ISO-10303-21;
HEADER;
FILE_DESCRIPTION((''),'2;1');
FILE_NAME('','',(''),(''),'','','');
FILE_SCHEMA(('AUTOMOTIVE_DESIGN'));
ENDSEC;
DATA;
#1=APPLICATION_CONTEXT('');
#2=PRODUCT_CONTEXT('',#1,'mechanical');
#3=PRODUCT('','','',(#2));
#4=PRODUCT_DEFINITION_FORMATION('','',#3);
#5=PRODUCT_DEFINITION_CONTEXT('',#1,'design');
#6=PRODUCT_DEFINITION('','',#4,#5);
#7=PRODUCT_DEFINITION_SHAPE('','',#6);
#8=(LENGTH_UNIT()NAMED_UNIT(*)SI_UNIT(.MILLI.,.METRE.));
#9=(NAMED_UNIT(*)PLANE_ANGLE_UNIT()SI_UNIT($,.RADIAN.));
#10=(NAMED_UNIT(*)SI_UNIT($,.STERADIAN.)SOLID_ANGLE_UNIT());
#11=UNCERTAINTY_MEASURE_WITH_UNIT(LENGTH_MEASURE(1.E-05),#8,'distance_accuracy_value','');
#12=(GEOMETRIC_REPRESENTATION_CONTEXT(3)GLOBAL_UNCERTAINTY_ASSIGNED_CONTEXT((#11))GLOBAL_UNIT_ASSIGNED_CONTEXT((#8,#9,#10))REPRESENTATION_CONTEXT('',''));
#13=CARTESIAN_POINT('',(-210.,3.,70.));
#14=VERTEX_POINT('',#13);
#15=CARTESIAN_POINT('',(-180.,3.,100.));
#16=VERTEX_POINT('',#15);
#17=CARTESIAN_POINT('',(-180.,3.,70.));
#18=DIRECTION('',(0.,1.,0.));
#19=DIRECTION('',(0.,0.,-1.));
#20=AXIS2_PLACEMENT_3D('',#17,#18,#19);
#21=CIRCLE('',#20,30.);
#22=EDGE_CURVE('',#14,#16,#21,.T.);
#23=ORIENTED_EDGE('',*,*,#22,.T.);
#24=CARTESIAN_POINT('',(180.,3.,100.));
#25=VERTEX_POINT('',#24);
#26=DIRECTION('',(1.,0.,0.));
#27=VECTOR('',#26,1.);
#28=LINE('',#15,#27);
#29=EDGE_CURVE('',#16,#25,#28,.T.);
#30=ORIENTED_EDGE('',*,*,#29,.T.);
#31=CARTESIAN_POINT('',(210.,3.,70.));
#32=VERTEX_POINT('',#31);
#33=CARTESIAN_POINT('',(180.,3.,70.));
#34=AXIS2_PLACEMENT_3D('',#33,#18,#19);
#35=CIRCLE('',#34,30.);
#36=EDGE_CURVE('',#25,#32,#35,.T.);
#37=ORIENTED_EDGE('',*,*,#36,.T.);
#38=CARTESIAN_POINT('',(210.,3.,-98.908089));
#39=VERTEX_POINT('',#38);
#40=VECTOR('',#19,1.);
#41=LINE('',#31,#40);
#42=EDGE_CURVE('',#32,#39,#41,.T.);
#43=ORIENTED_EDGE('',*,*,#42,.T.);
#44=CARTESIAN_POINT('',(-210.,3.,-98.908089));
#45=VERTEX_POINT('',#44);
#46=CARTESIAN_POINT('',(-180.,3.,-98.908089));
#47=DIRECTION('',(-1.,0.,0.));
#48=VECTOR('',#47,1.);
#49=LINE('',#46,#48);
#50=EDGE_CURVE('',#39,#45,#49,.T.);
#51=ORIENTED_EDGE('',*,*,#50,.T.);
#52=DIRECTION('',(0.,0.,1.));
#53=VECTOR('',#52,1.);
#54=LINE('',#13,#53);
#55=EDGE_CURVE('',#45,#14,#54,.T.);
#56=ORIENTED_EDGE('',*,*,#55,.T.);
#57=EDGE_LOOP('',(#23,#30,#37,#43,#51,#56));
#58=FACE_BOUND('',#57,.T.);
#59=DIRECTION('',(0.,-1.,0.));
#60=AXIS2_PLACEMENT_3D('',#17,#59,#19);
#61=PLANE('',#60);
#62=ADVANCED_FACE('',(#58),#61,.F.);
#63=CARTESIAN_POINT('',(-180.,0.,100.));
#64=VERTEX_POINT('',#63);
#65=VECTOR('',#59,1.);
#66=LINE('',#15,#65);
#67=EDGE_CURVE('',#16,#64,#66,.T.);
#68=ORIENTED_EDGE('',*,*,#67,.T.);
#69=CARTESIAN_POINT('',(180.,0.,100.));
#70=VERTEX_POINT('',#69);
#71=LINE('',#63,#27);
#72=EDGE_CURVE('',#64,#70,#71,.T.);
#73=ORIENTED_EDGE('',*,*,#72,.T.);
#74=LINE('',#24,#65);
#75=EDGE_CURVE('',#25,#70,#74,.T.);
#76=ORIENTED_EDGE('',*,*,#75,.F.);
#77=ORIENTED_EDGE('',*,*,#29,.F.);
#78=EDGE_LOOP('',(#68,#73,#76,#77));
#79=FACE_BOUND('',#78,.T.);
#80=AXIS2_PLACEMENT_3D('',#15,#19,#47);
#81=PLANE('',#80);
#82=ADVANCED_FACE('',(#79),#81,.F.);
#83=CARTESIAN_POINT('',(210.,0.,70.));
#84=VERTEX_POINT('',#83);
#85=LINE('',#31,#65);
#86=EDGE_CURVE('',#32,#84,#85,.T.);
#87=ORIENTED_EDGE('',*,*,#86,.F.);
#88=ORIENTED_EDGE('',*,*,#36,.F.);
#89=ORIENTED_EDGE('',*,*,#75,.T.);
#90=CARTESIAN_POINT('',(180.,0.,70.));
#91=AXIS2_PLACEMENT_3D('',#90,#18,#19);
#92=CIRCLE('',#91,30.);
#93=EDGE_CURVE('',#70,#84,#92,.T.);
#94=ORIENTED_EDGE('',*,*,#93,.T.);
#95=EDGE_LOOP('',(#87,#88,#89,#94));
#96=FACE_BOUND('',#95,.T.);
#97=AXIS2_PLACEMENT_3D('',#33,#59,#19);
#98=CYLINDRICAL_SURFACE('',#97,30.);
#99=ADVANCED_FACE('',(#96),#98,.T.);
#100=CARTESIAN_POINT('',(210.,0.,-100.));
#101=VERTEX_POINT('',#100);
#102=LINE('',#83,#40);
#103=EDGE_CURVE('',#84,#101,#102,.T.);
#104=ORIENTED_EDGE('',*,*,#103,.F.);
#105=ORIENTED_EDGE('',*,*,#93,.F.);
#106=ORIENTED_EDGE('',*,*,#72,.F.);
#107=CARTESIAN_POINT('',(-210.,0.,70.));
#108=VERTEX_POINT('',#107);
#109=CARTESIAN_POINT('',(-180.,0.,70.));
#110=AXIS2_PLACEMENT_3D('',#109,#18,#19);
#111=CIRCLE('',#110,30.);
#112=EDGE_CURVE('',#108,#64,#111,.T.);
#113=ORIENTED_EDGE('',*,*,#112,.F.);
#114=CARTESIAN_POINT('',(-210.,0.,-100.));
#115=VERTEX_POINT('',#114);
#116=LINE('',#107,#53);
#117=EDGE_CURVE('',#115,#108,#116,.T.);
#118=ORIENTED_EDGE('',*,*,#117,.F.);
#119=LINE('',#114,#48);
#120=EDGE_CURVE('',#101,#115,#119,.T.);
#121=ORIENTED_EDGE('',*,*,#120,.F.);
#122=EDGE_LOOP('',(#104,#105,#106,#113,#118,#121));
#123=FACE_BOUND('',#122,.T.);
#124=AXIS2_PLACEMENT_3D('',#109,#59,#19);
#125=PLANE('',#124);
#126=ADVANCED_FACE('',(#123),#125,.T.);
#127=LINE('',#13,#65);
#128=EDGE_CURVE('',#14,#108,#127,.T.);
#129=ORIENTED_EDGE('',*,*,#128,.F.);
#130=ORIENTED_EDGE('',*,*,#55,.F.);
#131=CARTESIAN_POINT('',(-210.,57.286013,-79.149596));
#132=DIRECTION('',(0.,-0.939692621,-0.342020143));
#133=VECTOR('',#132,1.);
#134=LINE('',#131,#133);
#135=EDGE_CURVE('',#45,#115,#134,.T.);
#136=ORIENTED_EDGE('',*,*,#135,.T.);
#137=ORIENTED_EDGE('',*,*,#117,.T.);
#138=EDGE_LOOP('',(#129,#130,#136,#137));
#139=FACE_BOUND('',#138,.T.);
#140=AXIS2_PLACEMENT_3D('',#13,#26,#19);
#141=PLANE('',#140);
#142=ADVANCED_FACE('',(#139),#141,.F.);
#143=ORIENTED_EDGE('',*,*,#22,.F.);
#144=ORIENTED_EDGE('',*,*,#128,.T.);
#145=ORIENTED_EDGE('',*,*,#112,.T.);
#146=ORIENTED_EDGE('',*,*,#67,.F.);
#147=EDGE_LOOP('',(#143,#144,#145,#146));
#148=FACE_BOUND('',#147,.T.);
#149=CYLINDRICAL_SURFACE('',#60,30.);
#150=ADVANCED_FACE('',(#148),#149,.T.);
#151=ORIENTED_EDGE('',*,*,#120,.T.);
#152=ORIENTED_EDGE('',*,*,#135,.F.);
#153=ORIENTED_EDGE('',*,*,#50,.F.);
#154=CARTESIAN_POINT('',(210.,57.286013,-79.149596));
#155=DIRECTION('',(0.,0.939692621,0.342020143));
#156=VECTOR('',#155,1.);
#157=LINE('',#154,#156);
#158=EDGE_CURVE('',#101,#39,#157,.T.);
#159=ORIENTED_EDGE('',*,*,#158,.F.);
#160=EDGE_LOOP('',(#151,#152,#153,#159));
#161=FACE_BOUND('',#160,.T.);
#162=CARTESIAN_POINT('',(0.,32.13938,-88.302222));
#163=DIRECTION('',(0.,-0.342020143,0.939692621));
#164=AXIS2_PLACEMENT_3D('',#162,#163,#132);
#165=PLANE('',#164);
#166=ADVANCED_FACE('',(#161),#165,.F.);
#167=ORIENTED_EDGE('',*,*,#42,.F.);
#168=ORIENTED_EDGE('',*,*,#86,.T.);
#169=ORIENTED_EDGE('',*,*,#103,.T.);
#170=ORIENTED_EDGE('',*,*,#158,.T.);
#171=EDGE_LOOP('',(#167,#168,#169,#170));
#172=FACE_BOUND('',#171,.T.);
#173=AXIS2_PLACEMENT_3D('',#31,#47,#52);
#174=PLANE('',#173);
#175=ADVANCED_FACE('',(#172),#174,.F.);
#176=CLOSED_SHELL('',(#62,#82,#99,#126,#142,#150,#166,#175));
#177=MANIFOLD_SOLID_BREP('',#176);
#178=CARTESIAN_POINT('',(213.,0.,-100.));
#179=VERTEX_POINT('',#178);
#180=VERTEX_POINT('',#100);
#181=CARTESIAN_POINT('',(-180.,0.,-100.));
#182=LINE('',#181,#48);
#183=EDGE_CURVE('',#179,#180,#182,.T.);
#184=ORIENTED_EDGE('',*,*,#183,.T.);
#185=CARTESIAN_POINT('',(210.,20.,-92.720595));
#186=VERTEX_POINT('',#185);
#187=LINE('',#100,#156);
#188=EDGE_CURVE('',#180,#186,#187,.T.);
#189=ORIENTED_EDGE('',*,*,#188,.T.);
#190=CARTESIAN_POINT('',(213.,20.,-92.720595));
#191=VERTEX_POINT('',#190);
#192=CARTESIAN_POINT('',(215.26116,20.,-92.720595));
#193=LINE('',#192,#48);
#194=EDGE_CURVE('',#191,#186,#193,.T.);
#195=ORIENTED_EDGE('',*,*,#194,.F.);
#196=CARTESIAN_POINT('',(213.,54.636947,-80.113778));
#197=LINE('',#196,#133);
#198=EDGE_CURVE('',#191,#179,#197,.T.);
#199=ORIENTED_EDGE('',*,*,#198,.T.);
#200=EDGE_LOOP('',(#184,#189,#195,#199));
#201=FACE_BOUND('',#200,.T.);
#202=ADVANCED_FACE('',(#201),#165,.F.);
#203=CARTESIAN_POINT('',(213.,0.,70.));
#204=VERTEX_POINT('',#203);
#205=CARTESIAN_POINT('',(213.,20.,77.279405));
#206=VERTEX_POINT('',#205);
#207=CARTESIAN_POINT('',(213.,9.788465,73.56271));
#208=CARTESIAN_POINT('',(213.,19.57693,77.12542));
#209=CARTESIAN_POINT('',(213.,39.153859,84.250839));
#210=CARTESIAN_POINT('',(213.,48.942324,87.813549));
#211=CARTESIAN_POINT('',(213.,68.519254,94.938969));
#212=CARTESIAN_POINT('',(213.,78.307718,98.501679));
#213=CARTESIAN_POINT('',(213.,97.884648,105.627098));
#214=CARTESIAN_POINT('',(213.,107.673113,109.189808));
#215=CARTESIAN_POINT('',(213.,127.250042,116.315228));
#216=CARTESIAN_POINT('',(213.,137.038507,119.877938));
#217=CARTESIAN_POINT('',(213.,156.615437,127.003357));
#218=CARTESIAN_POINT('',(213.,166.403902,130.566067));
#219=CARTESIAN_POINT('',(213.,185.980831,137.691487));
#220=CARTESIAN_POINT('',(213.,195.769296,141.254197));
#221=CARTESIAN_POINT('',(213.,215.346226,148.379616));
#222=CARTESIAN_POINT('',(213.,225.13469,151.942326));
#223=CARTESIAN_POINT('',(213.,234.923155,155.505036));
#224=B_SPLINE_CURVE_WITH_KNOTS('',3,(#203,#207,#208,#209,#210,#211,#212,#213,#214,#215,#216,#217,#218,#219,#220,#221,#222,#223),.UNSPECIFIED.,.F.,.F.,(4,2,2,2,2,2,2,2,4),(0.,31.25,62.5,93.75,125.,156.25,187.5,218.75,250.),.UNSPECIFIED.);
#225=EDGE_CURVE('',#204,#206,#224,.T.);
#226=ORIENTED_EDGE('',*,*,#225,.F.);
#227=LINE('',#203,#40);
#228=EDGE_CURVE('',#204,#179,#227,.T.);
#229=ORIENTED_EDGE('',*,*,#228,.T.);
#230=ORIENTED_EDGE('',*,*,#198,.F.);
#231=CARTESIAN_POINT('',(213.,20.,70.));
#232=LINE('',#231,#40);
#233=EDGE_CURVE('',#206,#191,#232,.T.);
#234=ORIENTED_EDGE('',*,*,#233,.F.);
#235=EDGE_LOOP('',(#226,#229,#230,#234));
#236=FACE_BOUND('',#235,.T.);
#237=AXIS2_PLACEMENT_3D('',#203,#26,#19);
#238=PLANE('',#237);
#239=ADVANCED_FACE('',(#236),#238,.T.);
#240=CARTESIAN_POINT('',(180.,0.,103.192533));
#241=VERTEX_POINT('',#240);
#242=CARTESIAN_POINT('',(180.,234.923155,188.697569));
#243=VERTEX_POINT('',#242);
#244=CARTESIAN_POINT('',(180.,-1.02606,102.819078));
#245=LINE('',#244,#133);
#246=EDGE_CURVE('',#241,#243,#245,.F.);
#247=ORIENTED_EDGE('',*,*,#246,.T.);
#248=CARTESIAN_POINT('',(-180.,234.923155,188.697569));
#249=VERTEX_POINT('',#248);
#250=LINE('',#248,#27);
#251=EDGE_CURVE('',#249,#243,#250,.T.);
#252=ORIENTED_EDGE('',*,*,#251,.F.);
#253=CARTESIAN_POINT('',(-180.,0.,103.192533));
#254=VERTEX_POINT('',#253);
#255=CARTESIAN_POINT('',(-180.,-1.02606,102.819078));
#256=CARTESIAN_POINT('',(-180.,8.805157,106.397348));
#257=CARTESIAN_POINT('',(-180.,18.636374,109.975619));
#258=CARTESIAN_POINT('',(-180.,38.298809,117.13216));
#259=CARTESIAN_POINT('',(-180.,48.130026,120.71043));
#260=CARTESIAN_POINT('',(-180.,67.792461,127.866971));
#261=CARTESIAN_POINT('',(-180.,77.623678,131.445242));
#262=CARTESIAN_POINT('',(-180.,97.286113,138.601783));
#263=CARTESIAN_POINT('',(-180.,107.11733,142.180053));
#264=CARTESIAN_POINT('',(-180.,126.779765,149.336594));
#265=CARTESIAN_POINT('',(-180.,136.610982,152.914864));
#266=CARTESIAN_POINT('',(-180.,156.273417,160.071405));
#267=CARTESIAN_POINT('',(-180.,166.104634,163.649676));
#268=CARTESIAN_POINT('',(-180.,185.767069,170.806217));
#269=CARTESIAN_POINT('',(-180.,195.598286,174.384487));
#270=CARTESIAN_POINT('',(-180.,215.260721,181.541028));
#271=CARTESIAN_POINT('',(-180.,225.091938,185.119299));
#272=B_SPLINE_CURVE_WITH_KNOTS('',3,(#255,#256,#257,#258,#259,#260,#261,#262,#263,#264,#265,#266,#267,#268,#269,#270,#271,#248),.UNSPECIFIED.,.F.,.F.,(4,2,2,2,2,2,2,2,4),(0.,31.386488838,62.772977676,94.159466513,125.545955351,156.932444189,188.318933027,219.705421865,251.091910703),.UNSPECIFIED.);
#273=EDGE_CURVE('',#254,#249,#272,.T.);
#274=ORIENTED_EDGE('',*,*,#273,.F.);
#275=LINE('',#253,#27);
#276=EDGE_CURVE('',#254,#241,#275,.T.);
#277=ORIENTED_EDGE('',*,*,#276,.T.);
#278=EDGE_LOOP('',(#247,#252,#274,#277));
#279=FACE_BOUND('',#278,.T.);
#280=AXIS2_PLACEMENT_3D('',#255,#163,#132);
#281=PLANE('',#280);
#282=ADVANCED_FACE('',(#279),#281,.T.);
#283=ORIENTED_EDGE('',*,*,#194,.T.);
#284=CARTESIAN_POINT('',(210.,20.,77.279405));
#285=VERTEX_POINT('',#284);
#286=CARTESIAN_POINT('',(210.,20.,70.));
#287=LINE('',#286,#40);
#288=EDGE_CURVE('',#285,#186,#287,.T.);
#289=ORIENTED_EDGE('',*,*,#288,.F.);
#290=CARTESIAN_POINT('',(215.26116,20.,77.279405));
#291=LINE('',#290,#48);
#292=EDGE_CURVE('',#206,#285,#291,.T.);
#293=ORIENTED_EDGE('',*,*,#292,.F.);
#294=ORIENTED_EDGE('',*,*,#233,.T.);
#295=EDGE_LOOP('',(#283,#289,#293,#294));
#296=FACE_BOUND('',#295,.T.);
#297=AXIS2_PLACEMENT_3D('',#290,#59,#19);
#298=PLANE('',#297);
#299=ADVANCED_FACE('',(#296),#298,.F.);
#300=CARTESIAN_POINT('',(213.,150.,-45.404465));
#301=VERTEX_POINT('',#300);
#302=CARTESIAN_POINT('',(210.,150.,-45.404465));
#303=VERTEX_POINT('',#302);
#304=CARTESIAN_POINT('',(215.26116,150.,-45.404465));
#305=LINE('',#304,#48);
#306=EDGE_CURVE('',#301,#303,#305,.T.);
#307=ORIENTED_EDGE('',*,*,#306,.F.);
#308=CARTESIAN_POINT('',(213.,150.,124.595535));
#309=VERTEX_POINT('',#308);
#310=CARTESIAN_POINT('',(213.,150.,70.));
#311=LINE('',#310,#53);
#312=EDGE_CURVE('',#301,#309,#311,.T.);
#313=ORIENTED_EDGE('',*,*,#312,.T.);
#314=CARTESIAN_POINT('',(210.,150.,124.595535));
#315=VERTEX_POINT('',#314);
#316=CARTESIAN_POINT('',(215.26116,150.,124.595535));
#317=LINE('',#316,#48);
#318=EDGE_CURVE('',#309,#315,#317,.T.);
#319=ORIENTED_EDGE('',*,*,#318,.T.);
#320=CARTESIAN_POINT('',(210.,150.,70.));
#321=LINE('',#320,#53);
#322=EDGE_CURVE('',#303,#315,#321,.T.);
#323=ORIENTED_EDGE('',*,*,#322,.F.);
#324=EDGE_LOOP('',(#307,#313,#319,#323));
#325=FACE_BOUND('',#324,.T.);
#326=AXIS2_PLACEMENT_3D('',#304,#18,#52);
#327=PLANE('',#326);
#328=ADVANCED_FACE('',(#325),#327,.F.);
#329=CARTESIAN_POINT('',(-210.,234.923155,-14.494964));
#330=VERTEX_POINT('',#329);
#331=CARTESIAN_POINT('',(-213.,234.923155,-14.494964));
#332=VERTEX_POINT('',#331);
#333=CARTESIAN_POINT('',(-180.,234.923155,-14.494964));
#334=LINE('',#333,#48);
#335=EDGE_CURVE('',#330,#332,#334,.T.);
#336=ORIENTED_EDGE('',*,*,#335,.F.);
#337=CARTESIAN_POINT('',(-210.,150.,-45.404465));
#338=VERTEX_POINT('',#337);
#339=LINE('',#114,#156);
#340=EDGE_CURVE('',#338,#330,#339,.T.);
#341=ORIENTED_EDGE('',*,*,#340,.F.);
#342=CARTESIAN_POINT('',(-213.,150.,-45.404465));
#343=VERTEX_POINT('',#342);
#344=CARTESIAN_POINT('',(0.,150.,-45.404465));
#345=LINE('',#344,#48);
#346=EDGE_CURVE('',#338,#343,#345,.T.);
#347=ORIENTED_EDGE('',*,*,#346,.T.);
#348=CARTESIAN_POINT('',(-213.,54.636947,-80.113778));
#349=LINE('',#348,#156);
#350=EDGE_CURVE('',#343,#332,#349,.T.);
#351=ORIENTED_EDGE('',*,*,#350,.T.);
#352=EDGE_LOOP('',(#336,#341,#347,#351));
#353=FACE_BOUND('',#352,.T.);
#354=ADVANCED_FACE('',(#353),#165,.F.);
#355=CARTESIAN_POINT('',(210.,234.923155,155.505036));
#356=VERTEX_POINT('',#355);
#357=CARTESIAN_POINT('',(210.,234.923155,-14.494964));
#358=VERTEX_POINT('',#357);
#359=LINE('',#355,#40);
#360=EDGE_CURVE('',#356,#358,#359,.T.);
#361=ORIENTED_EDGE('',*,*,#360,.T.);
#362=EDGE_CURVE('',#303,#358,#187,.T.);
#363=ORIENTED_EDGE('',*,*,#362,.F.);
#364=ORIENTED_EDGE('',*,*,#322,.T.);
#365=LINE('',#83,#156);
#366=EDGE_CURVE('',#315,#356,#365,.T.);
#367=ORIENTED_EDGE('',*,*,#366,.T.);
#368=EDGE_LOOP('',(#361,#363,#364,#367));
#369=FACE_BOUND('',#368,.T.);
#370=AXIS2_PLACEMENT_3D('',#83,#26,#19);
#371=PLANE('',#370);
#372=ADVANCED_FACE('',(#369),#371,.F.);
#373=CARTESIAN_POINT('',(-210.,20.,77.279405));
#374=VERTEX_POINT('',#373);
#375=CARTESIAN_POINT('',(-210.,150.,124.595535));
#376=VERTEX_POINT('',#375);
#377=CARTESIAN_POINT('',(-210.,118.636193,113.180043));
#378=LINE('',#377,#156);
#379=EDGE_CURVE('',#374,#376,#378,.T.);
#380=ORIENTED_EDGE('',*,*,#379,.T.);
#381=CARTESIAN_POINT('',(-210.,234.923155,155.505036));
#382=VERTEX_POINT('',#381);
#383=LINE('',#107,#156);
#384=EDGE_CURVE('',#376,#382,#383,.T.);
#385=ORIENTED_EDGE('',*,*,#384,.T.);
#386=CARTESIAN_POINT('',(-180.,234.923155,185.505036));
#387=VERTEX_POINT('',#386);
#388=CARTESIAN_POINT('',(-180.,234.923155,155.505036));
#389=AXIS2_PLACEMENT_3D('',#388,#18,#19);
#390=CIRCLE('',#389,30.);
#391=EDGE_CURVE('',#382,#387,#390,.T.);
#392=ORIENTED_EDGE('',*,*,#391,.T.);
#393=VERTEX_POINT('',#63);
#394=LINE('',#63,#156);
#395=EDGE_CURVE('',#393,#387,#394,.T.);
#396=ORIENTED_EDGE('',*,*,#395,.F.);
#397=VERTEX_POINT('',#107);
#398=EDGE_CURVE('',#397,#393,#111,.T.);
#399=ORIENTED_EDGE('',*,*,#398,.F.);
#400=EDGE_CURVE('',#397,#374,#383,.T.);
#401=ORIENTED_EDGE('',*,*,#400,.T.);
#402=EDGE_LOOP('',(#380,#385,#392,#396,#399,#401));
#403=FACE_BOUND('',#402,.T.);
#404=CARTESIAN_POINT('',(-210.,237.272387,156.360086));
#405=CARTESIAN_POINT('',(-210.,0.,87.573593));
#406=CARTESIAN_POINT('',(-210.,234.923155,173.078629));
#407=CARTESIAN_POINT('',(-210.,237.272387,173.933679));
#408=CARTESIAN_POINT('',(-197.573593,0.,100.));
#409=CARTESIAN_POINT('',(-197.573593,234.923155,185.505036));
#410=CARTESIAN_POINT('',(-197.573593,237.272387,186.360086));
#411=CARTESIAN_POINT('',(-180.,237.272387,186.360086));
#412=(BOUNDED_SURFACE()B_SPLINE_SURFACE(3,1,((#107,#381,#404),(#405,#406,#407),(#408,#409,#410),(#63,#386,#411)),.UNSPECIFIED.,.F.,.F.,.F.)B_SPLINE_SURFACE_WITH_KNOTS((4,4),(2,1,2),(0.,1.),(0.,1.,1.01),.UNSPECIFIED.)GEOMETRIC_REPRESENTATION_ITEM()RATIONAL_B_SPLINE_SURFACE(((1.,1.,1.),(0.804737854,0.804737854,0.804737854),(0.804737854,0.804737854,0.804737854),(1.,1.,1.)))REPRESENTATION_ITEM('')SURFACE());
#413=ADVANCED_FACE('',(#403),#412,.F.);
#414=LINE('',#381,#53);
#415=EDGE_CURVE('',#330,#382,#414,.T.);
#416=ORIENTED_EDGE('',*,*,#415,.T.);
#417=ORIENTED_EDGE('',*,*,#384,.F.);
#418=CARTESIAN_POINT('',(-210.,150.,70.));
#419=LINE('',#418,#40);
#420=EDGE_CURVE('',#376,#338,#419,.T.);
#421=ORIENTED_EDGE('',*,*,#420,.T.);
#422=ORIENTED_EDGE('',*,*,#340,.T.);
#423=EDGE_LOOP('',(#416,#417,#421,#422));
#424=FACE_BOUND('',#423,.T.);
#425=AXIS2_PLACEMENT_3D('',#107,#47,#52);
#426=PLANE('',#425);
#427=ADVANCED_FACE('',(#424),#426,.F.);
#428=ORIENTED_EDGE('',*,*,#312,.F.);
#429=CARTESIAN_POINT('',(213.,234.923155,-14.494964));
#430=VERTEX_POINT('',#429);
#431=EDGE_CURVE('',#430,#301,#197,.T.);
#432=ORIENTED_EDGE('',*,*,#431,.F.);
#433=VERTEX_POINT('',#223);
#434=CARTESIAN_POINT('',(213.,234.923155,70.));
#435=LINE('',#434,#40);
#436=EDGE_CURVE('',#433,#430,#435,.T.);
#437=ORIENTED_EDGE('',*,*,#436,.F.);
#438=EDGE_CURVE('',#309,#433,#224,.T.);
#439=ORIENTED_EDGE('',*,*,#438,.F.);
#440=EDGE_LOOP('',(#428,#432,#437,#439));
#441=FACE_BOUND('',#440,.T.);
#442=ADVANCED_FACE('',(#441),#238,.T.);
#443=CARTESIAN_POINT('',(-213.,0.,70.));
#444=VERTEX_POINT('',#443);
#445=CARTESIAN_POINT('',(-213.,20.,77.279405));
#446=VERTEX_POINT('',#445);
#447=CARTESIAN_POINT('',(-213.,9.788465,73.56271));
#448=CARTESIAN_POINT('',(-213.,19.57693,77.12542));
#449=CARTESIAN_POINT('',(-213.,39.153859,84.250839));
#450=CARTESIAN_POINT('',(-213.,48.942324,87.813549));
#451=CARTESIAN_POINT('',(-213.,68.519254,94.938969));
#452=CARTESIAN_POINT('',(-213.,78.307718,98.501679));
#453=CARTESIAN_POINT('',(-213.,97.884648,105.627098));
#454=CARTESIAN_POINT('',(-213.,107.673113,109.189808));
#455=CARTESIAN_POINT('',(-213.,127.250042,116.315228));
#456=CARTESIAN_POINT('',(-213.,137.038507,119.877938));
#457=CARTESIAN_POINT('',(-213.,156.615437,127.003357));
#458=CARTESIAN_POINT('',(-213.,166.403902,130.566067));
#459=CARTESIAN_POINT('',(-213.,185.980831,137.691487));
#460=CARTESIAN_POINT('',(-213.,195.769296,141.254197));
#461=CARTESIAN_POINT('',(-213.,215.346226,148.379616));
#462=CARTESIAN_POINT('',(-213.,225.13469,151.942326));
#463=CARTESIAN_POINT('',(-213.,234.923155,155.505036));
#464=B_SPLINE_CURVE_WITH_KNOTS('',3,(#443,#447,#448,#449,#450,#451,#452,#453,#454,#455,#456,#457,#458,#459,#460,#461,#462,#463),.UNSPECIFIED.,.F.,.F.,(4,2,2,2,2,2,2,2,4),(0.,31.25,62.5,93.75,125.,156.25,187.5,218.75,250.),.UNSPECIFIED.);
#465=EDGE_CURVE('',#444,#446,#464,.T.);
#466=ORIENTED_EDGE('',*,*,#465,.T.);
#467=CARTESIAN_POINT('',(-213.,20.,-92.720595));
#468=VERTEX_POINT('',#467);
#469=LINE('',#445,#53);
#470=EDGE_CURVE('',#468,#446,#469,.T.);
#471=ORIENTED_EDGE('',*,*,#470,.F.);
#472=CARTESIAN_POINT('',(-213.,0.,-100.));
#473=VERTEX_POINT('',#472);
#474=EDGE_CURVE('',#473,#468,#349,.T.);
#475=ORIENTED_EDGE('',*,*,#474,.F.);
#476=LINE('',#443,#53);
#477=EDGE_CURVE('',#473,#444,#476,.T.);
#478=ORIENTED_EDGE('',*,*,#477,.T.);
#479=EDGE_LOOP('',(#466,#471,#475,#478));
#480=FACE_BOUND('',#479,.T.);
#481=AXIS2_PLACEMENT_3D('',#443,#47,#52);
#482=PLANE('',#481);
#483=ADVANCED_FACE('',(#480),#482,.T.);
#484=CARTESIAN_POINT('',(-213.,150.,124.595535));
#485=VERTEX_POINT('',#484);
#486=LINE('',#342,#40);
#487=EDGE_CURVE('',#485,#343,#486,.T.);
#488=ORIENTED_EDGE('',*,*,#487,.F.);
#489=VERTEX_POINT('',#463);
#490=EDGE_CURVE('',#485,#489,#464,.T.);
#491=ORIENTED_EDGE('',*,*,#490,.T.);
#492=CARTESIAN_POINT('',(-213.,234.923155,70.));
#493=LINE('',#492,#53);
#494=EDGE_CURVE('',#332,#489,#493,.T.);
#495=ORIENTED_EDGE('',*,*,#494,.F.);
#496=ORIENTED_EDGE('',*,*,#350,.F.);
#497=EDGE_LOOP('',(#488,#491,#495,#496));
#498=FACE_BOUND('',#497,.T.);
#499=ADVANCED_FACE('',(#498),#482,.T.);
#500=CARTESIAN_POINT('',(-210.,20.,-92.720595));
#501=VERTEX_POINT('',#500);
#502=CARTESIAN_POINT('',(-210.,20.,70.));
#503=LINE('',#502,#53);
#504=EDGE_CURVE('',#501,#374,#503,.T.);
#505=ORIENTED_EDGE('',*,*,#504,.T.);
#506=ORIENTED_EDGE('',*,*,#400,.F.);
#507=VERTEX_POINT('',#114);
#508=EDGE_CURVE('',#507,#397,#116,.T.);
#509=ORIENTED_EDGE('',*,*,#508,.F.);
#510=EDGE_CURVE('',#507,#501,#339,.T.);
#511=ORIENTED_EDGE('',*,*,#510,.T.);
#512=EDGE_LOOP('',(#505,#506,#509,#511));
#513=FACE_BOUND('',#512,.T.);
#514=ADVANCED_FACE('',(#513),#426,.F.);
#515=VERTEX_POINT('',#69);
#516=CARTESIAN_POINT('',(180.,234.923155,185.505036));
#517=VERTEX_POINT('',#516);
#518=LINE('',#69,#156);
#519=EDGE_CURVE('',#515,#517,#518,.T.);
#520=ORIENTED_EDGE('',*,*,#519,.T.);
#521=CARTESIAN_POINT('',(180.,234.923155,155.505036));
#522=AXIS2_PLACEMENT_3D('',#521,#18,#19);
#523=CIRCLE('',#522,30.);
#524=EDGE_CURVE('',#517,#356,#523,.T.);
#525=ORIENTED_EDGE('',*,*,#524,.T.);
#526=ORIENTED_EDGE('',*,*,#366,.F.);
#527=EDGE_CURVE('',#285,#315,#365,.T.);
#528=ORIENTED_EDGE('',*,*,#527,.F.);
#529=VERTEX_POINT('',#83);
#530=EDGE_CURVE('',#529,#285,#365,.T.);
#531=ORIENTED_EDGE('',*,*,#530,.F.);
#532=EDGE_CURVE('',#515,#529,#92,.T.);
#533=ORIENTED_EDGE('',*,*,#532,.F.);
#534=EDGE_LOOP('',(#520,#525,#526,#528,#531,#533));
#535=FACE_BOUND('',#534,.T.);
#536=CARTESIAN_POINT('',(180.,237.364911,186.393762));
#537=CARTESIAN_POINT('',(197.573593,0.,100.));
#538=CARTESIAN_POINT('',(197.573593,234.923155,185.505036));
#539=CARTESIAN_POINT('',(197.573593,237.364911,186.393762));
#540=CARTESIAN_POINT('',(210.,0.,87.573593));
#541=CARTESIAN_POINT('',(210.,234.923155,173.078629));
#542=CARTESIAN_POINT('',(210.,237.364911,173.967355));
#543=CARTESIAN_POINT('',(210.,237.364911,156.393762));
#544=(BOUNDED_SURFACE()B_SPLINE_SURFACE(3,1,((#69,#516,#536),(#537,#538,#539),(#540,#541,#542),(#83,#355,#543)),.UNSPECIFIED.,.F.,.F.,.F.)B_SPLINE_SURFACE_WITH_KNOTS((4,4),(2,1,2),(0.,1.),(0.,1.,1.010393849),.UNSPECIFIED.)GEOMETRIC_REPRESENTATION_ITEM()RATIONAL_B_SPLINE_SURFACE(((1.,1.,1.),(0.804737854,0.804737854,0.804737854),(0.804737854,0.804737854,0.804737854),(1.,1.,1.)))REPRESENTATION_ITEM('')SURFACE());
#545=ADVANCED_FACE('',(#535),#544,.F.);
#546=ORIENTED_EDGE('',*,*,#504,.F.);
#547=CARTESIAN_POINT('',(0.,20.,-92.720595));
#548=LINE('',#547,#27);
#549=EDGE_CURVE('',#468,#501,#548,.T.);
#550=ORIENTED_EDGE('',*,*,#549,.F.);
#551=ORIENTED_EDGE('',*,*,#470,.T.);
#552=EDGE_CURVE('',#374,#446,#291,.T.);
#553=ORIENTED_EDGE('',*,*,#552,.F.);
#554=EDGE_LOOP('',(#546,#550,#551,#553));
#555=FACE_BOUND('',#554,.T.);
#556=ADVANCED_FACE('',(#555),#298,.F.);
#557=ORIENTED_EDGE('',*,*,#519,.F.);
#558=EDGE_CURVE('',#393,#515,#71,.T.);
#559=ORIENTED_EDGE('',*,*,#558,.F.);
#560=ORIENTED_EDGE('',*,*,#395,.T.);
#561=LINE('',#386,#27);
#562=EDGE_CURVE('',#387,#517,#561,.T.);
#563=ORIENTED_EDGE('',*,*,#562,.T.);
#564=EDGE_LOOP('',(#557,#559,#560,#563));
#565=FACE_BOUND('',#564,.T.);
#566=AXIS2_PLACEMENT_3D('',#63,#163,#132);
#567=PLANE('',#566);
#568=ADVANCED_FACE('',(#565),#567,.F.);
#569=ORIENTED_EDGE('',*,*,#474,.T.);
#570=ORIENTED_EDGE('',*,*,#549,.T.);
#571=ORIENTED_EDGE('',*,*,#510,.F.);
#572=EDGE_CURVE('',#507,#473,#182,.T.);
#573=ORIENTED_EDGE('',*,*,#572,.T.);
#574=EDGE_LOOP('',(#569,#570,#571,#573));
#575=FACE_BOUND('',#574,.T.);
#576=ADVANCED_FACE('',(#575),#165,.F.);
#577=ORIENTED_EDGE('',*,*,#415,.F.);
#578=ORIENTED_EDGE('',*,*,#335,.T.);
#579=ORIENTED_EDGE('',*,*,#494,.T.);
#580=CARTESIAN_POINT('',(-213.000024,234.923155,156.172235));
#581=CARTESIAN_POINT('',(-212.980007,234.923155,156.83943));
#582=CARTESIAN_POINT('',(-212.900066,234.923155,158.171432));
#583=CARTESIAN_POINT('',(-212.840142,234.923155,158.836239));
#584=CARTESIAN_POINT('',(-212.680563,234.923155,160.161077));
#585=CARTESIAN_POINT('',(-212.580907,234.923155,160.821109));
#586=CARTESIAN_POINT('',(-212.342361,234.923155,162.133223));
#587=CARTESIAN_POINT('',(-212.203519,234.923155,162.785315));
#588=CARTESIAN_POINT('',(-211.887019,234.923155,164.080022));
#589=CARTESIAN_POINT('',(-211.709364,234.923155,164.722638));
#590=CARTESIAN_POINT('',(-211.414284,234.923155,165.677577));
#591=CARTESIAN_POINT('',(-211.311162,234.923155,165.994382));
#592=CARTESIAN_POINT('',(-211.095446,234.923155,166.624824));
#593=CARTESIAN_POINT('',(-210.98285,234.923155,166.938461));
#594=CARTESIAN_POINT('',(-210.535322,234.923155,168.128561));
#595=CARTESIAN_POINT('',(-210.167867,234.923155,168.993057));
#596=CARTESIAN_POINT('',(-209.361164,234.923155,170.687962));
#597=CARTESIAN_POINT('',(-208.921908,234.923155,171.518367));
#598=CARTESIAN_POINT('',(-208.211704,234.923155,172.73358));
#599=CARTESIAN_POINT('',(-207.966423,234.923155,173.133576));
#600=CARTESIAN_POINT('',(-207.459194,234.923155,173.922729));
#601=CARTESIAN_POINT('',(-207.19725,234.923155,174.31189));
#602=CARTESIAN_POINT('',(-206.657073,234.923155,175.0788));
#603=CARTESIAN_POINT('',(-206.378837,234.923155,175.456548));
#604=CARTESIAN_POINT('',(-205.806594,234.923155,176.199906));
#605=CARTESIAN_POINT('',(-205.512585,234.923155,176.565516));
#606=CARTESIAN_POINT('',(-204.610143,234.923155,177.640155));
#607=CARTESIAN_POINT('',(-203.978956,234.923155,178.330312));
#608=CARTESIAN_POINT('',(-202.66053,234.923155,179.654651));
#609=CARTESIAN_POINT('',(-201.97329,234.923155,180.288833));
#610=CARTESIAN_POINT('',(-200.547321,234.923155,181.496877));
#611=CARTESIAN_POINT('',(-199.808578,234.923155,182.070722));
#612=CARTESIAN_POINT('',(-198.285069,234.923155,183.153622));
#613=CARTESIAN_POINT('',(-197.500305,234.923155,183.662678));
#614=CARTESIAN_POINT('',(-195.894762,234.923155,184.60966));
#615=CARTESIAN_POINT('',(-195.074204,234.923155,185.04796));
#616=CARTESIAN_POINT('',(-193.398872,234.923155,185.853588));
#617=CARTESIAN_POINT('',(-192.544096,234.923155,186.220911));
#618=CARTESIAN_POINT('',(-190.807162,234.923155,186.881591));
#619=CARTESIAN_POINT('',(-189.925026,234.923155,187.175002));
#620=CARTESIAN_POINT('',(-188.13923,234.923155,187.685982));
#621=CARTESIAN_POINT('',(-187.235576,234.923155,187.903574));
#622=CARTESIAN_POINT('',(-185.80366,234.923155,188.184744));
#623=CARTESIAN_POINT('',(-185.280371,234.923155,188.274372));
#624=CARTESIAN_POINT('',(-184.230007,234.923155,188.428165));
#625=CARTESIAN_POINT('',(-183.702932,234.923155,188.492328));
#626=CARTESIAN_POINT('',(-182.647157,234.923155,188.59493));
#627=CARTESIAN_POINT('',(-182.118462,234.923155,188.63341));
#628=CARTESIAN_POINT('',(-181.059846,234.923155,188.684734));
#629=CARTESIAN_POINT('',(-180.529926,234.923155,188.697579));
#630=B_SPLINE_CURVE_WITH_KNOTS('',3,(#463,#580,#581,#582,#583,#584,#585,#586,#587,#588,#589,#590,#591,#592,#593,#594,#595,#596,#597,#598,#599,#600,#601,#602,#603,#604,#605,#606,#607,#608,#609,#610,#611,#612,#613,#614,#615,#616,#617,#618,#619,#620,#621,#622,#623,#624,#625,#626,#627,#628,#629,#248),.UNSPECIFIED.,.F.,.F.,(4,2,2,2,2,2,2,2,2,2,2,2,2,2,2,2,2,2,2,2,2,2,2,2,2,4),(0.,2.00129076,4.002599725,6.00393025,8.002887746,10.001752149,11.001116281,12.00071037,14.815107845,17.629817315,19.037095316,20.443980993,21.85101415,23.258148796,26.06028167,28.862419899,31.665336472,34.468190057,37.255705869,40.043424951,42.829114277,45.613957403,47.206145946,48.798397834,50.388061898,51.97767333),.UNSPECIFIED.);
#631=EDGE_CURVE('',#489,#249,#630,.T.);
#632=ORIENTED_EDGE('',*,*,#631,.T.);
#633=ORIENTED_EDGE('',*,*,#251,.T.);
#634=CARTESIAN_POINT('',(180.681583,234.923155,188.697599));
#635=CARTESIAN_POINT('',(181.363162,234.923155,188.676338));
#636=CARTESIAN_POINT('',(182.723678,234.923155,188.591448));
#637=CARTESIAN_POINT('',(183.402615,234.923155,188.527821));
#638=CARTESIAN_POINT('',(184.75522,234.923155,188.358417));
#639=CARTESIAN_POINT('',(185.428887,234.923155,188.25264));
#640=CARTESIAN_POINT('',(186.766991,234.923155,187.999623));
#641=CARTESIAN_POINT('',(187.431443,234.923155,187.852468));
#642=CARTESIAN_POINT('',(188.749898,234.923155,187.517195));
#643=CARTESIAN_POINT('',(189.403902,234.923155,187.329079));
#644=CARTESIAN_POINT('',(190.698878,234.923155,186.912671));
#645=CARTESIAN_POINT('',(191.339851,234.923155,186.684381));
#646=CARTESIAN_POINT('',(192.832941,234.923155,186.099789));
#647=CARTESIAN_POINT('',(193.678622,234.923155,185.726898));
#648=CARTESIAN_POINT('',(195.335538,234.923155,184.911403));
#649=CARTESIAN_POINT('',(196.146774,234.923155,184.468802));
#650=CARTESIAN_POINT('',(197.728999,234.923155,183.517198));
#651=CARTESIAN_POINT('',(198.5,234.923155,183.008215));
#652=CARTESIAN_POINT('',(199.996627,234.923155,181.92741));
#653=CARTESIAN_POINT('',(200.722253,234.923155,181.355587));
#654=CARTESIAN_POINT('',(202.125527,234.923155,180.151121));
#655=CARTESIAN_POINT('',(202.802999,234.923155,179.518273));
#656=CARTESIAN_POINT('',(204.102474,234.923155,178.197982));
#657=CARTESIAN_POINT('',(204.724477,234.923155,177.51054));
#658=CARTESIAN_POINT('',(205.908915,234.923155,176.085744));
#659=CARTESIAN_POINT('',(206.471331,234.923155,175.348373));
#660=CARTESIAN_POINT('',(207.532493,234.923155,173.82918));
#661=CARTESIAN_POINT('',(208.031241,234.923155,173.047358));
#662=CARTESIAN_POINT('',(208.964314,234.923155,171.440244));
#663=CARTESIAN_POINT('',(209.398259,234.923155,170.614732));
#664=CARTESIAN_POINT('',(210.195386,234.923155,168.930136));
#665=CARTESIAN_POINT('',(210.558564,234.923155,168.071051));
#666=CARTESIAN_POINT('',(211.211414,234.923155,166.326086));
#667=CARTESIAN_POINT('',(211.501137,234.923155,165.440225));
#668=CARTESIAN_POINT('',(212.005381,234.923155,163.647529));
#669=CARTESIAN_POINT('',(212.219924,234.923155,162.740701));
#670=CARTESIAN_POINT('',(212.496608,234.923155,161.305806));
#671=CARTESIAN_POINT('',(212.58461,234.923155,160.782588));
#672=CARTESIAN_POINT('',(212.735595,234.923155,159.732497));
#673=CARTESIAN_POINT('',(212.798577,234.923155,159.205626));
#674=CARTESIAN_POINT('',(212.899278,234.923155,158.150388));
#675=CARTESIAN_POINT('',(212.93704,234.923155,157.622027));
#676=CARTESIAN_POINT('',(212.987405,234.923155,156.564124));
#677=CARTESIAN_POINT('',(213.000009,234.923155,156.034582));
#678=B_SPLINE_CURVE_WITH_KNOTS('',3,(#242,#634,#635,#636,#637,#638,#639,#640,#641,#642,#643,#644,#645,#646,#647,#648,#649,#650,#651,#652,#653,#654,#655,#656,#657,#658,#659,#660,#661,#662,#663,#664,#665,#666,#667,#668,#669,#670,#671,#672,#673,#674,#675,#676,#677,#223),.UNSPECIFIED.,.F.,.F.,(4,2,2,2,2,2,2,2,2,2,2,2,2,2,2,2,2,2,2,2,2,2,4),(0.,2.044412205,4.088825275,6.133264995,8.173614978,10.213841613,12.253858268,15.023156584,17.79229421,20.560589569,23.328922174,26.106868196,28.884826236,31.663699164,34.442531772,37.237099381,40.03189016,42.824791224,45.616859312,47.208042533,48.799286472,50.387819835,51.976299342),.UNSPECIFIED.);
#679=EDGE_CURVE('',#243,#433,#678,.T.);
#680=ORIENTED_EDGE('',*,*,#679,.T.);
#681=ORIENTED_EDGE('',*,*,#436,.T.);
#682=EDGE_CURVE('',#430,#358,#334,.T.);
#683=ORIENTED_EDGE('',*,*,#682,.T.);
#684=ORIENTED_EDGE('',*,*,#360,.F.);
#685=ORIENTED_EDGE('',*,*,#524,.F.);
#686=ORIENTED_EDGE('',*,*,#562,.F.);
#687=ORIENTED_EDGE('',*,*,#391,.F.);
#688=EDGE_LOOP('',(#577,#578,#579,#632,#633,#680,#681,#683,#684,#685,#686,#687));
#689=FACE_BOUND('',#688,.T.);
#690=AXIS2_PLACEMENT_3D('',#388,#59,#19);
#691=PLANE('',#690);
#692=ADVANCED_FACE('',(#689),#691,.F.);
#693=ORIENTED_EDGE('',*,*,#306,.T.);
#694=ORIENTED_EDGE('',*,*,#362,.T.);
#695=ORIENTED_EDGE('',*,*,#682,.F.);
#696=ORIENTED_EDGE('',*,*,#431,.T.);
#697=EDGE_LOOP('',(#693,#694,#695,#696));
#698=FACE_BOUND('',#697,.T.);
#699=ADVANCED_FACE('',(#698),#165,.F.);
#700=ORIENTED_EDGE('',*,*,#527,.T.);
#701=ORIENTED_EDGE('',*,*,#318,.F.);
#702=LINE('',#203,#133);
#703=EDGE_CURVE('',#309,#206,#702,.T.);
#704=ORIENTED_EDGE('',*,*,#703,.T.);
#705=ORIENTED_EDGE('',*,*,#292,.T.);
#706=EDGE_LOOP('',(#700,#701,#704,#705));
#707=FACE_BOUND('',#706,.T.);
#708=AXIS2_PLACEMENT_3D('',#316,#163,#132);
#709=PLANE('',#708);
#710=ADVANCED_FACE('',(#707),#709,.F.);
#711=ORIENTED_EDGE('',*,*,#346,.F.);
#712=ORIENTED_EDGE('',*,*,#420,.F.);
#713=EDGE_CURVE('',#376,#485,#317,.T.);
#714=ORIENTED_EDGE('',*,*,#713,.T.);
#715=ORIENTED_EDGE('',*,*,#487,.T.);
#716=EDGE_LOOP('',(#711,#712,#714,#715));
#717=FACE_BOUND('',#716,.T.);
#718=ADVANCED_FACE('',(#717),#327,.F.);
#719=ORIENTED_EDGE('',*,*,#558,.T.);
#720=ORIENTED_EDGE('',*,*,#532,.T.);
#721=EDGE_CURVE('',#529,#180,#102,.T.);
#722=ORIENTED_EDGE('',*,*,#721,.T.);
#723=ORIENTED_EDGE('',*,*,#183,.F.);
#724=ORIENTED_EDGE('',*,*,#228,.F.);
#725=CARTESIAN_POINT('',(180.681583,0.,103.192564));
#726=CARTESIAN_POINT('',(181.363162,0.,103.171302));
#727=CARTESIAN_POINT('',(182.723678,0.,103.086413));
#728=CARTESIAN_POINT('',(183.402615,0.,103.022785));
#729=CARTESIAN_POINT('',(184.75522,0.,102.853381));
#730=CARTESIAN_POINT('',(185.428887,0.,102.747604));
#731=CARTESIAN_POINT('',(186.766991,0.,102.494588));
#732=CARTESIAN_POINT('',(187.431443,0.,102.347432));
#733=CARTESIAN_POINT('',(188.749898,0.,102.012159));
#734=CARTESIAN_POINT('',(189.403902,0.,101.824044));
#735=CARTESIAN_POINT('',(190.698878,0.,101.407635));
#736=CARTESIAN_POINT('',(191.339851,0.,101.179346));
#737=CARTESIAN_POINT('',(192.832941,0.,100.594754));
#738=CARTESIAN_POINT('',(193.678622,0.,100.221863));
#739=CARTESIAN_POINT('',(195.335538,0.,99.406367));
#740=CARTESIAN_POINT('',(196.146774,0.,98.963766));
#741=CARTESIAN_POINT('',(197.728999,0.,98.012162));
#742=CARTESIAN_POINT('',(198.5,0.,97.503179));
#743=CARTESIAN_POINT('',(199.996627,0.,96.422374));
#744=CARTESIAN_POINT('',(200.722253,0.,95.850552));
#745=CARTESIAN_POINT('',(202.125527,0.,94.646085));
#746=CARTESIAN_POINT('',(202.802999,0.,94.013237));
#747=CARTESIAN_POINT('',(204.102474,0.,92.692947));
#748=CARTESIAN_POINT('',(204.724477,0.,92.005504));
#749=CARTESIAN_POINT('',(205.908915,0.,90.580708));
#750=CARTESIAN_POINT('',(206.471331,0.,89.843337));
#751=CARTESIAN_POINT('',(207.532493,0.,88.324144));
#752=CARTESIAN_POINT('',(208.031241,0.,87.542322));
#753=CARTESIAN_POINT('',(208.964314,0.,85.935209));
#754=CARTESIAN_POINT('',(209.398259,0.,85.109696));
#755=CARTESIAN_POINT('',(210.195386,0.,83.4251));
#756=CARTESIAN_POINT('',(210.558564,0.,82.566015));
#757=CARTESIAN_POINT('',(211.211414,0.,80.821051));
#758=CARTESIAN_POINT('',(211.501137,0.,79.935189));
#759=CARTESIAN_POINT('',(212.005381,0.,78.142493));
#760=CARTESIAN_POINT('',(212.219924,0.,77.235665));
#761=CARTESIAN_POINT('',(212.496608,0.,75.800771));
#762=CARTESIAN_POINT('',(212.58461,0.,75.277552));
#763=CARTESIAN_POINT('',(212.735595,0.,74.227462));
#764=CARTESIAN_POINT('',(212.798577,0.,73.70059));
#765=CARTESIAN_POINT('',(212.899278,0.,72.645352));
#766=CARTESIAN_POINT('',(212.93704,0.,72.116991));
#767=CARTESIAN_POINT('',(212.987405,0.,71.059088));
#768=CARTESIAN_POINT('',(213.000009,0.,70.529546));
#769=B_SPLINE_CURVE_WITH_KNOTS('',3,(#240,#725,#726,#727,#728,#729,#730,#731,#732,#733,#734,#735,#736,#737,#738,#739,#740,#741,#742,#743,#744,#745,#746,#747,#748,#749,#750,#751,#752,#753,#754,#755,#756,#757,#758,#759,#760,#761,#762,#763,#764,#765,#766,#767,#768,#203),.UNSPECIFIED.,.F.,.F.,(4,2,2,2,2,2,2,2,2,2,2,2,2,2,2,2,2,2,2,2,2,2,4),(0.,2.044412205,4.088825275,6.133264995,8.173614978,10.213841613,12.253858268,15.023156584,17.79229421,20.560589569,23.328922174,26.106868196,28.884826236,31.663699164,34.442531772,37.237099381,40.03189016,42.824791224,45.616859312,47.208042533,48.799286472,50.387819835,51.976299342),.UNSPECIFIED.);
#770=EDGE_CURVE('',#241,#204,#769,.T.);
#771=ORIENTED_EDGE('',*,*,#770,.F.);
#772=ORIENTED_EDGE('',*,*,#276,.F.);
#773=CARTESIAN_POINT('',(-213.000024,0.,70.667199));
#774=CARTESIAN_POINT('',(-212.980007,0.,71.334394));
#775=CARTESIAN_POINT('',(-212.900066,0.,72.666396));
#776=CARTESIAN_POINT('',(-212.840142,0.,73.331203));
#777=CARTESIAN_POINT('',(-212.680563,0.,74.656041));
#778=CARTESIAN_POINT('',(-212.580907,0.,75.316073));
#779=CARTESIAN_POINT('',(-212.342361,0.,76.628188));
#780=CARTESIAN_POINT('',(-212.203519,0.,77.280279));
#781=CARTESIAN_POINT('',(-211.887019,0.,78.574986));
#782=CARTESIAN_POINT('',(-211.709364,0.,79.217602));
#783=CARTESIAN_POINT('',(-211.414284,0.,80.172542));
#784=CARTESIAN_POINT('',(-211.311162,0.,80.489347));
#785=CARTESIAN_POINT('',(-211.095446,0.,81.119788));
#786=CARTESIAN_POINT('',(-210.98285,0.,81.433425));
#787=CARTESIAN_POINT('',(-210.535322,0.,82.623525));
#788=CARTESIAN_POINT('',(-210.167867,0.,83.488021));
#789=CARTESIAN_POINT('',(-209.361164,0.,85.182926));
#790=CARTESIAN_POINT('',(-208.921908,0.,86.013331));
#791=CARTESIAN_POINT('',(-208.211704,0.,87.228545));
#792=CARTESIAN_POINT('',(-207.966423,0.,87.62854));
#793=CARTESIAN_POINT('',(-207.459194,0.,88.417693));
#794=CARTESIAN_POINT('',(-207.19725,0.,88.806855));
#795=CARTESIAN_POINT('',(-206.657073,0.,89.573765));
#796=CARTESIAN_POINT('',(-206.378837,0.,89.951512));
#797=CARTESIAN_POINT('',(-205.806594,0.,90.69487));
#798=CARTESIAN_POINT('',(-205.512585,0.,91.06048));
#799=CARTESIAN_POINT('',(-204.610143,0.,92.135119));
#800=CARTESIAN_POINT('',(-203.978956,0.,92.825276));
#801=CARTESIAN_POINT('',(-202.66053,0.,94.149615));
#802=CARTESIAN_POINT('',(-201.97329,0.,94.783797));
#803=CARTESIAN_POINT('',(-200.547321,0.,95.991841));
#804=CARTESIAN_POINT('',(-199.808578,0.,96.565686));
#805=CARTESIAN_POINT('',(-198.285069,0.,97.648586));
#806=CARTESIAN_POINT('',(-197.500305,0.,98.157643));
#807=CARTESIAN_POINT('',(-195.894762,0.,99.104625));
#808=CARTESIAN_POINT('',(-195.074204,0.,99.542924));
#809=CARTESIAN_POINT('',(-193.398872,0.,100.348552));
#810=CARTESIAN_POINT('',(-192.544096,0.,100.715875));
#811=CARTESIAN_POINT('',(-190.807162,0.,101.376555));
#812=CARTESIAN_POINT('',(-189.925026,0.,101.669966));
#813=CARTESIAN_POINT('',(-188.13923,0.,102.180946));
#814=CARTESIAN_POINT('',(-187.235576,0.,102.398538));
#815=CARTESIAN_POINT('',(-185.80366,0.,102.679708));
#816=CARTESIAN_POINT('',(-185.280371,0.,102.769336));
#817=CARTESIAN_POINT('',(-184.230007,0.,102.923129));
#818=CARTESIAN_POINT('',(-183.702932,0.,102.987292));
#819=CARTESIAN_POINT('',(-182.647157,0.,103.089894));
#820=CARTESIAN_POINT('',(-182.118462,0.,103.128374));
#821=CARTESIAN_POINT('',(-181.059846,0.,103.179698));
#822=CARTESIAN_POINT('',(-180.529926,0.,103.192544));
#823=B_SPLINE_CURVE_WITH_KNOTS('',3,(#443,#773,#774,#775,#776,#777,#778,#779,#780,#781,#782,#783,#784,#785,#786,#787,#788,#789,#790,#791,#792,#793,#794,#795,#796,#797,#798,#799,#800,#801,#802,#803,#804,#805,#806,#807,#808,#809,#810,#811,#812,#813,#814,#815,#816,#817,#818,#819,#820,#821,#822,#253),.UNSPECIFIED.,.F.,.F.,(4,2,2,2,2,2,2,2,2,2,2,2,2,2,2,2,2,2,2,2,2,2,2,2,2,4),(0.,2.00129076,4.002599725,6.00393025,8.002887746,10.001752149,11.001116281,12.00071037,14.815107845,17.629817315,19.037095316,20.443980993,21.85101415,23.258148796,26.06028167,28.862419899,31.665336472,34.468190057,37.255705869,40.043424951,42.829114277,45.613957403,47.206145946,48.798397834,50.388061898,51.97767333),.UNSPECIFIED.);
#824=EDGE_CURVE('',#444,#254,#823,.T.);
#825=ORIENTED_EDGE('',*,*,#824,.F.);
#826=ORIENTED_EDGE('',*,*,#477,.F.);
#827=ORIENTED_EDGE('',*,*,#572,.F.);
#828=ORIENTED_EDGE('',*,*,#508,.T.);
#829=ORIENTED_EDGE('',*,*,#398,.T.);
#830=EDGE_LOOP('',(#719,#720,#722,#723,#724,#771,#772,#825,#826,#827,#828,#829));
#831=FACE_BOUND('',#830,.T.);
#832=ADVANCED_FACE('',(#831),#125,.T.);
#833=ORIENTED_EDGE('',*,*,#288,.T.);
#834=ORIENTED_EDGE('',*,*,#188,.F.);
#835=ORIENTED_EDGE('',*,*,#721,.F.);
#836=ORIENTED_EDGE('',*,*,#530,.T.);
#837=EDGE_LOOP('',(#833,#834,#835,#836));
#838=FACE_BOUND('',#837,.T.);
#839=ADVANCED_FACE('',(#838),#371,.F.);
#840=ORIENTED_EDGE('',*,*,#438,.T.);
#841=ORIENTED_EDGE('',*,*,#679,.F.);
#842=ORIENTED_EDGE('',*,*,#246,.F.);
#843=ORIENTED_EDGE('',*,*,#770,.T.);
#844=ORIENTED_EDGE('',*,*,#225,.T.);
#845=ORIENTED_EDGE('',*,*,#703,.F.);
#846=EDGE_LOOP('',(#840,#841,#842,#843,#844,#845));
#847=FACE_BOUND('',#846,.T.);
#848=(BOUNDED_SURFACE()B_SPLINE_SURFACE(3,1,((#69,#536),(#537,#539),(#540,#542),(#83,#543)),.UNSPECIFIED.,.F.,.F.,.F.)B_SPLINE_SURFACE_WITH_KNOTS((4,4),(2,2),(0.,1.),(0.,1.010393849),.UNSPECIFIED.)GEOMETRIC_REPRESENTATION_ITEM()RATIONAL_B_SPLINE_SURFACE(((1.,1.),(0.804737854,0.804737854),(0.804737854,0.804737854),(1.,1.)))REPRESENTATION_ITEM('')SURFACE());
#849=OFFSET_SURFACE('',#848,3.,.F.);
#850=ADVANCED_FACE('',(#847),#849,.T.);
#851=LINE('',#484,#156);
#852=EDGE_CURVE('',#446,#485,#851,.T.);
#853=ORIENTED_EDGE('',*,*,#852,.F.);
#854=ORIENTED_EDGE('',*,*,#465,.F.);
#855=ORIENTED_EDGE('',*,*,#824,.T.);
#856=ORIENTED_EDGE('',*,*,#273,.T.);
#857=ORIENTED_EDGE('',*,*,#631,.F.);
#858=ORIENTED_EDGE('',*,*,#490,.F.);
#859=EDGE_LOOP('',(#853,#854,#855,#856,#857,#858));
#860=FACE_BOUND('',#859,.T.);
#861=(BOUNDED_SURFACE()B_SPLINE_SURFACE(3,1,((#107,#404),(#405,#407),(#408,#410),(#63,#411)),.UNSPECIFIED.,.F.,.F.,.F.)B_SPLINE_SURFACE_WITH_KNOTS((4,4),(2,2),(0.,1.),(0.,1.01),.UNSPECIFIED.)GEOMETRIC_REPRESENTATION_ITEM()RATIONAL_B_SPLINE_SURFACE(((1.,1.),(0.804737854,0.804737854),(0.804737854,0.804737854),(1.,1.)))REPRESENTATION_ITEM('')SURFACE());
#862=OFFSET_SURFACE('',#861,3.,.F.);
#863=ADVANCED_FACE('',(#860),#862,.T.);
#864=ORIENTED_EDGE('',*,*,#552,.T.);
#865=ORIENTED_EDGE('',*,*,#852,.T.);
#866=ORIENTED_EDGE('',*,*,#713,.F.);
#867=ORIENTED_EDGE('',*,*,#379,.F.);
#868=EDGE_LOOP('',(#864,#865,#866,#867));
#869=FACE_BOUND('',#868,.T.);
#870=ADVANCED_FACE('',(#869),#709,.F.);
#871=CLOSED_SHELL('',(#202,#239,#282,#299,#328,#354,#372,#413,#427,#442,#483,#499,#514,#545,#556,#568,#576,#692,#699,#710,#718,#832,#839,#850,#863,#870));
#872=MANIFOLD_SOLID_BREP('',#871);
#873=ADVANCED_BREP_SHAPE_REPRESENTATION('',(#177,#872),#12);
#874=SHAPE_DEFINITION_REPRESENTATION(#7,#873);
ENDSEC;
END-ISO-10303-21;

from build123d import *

# Parameters (mm, degrees)
SWEEP_THIN1_START       = 35.293924935
SWEEP_THIN1_DEPTH       = 179.41214993
SWEEP_THIN1_START_2     = -35.293925135
SWEEP_THIN1_2_DEPTH     = 320.58785027
SWEEP_THIN1_START_3     = -67
SWEEP_THIN1_3_OUTLINE_W = 426
SWEEP_THIN1_3_OUTLINE_H = 295
SWEEP_THIN1_3_DEPTH     = 67
SWEEP_THIN1_START_4     = 234.923155196
SWEEP_THIN1_4_OUTLINE_W = 426
SWEEP_THIN1_4_OUTLINE_H = 295
SWEEP_THIN1_4_DEPTH     = 66.330881923
BOSS_EXTRUDE2_DEPTH     = 3
SKETCH6_W               = 723.00386444
SKETCH6_H               = 605.053805232
CUT_EXTRUDE1_DEPTH      = 3
CUT_EXTRUDE2_DEPTH      = 522.796571163


with BuildPart() as part:
    # Sweep-Thin1: read off the stored shape, not the designer's step
    # Sweep-Thin1 outline → Sweep-Thin1 (new body)
    with BuildSketch(Plane(origin=(0, 0, 0), x_dir=(1, 0, 0), z_dir=(0, 0.9396926207859089, 0.3420201433256673)).offset(SWEEP_THIN1_START)):
        with BuildLine():
            Line((213, -65.778483455), (213, 96.969262079))
            Line((213, 96.969262079), (-213, 96.969262079))
            Line((-213, 96.969262079), (-213, -65.778483455))
            add(Edge.make_bspline(
                [(-213, -65.778483455), (-213, -69.477042237), (-212.493972968, -73.37256542), (-211.393047263, -77.378729206), (-209.625765414, -81.371277703), (-207.160966169, -85.187590547), (-204.030117008, -88.644891062), (-200.35485162, -91.564481232), (-196.328004584, -93.851338413), (-192.135894004, -95.485342048), (-187.941508955, -96.501990369), (-183.867765418, -96.969262079), (-180, -96.969262079)],
                knots=[0, 0, 0, 0, 0, 0, 0, 0, 0, 0, 0, 0, 0, 1, 1, 1, 1, 1, 1, 1, 1, 1, 1, 1, 1, 1], degree=12))
            Line((-180, -96.969262079), (180, -96.969262079))
            add(Edge.make_bspline(
                [(180, -96.969262079), (183.867765418, -96.969262079), (187.941508955, -96.501990369), (192.135894005, -95.485342048), (196.328004584, -93.851338413), (200.35485162, -91.564481232), (204.030117008, -88.644891062), (207.16096617, -85.187590547), (209.625765413, -81.371277703), (211.393047263, -77.378729206), (212.493972968, -73.37256542), (213, -69.477042237), (213, -65.778483455)],
                knots=[0, 0, 0, 0, 0, 0, 0, 0, 0, 0, 0, 0, 0, 1, 1, 1, 1, 1, 1, 1, 1, 1, 1, 1, 1, 1], degree=12))
        make_face()
        with BuildLine():
            Line((-210, 93.969262079), (210, 93.969262079))
            Line((210, 93.969262079), (210, -65.778483455))
            add(Edge.make_bspline(
                [(180, -93.969262079), (197.573593129, -93.969262079), (210, -82.292259239), (210, -65.778483455)],
                knots=[0, 0, 0, 0, 1, 1, 1, 1], degree=3, weights=[1, 0.804737854, 0.804737854, 1]))
            Line((180, -93.969262079), (-180, -93.969262079))
            add(Edge.make_bspline(
                [(-210, -65.778483455), (-210, -82.292259239), (-197.573593129, -93.969262079), (-180, -93.969262079)],
                knots=[0, 0, 0, 0, 1, 1, 1, 1], degree=3, weights=[1, 0.804737854, 0.804737854, 1]))
            Line((-210, -65.778483455), (-210, 93.969262079))
        make_face(mode=Mode.SUBTRACT)
    extrude(amount=SWEEP_THIN1_DEPTH)

    # Sweep-Thin1 2 outline → Sweep-Thin1 2 (add)
    with BuildSketch(Plane(origin=(0, 0, 0), x_dir=(1, 0, 0), z_dir=(0, 0.9396926207859089, 0.3420201433256673)).offset(SWEEP_THIN1_START_2)):
        with BuildLine():
            Line((-213, 96.969262079), (-213, -65.778483455))
            add(Edge.make_bspline(
                [(-213, -65.778483455), (-213, -69.477042237), (-212.493972968, -73.37256542), (-211.393047263, -77.378729206), (-209.625765414, -81.371277703), (-207.160966169, -85.187590547), (-204.030117008, -88.644891062), (-200.35485162, -91.564481232), (-196.328004584, -93.851338413), (-192.135894004, -95.485342048), (-187.941508955, -96.501990369), (-183.867765418, -96.969262079), (-180, -96.969262079)],
                knots=[0, 0, 0, 0, 0, 0, 0, 0, 0, 0, 0, 0, 0, 1, 1, 1, 1, 1, 1, 1, 1, 1, 1, 1, 1, 1], degree=12))
            Line((-180, -96.969262079), (180, -96.969262079))
            add(Edge.make_bspline(
                [(180, -96.969262079), (183.867765418, -96.969262079), (187.941508955, -96.501990369), (192.135894005, -95.485342048), (196.328004584, -93.851338413), (200.35485162, -91.564481232), (204.030117008, -88.644891062), (207.16096617, -85.187590547), (209.625765413, -81.371277703), (211.393047263, -77.378729206), (212.493972968, -73.37256542), (213, -69.477042237), (213, -65.778483455)],
                knots=[0, 0, 0, 0, 0, 0, 0, 0, 0, 0, 0, 0, 0, 1, 1, 1, 1, 1, 1, 1, 1, 1, 1, 1, 1, 1], degree=12))
            Line((213, -65.778483455), (213, 96.969262079))
            Line((213, 96.969262079), (-213, 96.969262079))
        make_face()
        with BuildLine():
            add(Edge.make_bspline(
                [(-210, -65.778483455), (-210, -82.292259239), (-197.573593129, -93.969262079), (-180, -93.969262079)],
                knots=[0, 0, 0, 0, 1, 1, 1, 1], degree=3, weights=[1, 0.804737854, 0.804737854, 1]))
            Line((-210, -65.778483455), (-210, 93.969262079))
            Line((-210, 93.969262079), (210, 93.969262079))
            Line((210, 93.969262079), (210, -65.778483455))
            add(Edge.make_bspline(
                [(180, -93.969262079), (197.573593129, -93.969262079), (210, -82.292259239), (210, -65.778483455)],
                knots=[0, 0, 0, 0, 1, 1, 1, 1], degree=3, weights=[1, 0.804737854, 0.804737854, 1]))
            Line((180, -93.969262079), (-180, -93.969262079))
        make_face(mode=Mode.SUBTRACT)
    extrude(amount=SWEEP_THIN1_2_DEPTH)

    # Sweep-Thin1 3 outline → Sweep-Thin1 3 (cut)
    with BuildSketch(Plane(origin=(0, 0, 0), x_dir=(1, 0, 0), z_dir=(0, 1, 0)).offset(SWEEP_THIN1_START_3)):
        with Locations((0, -42.5)):
            Rectangle(SWEEP_THIN1_3_OUTLINE_W, SWEEP_THIN1_3_OUTLINE_H)
    extrude(amount=SWEEP_THIN1_3_DEPTH, mode=Mode.SUBTRACT)

    # Sweep-Thin1 4 outline → Sweep-Thin1 4 (cut)
    with BuildSketch(Plane(origin=(0, 0, 0), x_dir=(1, 0, 0), z_dir=(0, 1, 0)).offset(SWEEP_THIN1_START_4)):
        with Locations((0, -42.5)):
            Rectangle(SWEEP_THIN1_4_OUTLINE_W, SWEEP_THIN1_4_OUTLINE_H)
    extrude(amount=SWEEP_THIN1_4_DEPTH, mode=Mode.SUBTRACT)


with BuildPart() as body_2:
    # Sketch5 → Boss-Extrude2 (new body)
    with BuildSketch(Plane(origin=(0, 0, 0), x_dir=(1, 0, 0), z_dir=(0, 1, 0))):
        with BuildLine():
            Line((-180, -100), (180, -100))
            ThreePointArc((180, -100), (201.213203436, -91.213203436), (210, -70))
            Line((210, -70), (210, 100))
            Line((210, 100), (-210, 100))
            Line((-210, 100), (-210, -70))
            ThreePointArc((-210, -70), (-201.213203436, -91.213203436), (-180, -100))
        make_face()
    extrude(amount=BOSS_EXTRUDE2_DEPTH)


with BuildPart() as cut_extrude1_tool:
    # Sketch6 → Cut-Extrude1 (new body)
    with BuildSketch(Plane(origin=(0, 33.165440914, -91.121300018), x_dir=(-1, 0, 0), z_dir=(0, 0.34202014332566627, -0.9396926207859093))):
        Rectangle(SKETCH6_W, SKETCH6_H)
    extrude(amount=-CUT_EXTRUDE1_DEPTH)


with BuildPart() as part_1:
    add(part.part)

    # Cut-Extrude1: cut by cut_extrude1_tool
    add(cut_extrude1_tool.part, mode=Mode.SUBTRACT)

    # Sketch7 → Cut-Extrude2 (cut, through all)
    with BuildSketch(Plane.ZY.offset(213)):
        Polygon((-45.40446486, 150), (124.59553514, 150), (77.279404685, 20), (-92.720595315, 20), align=None)
    extrude(amount=-CUT_EXTRUDE2_DEPTH, mode=Mode.SUBTRACT)


with BuildPart() as body_2_1:
    add(body_2.part)

    # Cut-Extrude1: cut by cut_extrude1_tool
    add(cut_extrude1_tool.part, mode=Mode.SUBTRACT)


solid = Compound([part_1.part, body_2_1.part])
